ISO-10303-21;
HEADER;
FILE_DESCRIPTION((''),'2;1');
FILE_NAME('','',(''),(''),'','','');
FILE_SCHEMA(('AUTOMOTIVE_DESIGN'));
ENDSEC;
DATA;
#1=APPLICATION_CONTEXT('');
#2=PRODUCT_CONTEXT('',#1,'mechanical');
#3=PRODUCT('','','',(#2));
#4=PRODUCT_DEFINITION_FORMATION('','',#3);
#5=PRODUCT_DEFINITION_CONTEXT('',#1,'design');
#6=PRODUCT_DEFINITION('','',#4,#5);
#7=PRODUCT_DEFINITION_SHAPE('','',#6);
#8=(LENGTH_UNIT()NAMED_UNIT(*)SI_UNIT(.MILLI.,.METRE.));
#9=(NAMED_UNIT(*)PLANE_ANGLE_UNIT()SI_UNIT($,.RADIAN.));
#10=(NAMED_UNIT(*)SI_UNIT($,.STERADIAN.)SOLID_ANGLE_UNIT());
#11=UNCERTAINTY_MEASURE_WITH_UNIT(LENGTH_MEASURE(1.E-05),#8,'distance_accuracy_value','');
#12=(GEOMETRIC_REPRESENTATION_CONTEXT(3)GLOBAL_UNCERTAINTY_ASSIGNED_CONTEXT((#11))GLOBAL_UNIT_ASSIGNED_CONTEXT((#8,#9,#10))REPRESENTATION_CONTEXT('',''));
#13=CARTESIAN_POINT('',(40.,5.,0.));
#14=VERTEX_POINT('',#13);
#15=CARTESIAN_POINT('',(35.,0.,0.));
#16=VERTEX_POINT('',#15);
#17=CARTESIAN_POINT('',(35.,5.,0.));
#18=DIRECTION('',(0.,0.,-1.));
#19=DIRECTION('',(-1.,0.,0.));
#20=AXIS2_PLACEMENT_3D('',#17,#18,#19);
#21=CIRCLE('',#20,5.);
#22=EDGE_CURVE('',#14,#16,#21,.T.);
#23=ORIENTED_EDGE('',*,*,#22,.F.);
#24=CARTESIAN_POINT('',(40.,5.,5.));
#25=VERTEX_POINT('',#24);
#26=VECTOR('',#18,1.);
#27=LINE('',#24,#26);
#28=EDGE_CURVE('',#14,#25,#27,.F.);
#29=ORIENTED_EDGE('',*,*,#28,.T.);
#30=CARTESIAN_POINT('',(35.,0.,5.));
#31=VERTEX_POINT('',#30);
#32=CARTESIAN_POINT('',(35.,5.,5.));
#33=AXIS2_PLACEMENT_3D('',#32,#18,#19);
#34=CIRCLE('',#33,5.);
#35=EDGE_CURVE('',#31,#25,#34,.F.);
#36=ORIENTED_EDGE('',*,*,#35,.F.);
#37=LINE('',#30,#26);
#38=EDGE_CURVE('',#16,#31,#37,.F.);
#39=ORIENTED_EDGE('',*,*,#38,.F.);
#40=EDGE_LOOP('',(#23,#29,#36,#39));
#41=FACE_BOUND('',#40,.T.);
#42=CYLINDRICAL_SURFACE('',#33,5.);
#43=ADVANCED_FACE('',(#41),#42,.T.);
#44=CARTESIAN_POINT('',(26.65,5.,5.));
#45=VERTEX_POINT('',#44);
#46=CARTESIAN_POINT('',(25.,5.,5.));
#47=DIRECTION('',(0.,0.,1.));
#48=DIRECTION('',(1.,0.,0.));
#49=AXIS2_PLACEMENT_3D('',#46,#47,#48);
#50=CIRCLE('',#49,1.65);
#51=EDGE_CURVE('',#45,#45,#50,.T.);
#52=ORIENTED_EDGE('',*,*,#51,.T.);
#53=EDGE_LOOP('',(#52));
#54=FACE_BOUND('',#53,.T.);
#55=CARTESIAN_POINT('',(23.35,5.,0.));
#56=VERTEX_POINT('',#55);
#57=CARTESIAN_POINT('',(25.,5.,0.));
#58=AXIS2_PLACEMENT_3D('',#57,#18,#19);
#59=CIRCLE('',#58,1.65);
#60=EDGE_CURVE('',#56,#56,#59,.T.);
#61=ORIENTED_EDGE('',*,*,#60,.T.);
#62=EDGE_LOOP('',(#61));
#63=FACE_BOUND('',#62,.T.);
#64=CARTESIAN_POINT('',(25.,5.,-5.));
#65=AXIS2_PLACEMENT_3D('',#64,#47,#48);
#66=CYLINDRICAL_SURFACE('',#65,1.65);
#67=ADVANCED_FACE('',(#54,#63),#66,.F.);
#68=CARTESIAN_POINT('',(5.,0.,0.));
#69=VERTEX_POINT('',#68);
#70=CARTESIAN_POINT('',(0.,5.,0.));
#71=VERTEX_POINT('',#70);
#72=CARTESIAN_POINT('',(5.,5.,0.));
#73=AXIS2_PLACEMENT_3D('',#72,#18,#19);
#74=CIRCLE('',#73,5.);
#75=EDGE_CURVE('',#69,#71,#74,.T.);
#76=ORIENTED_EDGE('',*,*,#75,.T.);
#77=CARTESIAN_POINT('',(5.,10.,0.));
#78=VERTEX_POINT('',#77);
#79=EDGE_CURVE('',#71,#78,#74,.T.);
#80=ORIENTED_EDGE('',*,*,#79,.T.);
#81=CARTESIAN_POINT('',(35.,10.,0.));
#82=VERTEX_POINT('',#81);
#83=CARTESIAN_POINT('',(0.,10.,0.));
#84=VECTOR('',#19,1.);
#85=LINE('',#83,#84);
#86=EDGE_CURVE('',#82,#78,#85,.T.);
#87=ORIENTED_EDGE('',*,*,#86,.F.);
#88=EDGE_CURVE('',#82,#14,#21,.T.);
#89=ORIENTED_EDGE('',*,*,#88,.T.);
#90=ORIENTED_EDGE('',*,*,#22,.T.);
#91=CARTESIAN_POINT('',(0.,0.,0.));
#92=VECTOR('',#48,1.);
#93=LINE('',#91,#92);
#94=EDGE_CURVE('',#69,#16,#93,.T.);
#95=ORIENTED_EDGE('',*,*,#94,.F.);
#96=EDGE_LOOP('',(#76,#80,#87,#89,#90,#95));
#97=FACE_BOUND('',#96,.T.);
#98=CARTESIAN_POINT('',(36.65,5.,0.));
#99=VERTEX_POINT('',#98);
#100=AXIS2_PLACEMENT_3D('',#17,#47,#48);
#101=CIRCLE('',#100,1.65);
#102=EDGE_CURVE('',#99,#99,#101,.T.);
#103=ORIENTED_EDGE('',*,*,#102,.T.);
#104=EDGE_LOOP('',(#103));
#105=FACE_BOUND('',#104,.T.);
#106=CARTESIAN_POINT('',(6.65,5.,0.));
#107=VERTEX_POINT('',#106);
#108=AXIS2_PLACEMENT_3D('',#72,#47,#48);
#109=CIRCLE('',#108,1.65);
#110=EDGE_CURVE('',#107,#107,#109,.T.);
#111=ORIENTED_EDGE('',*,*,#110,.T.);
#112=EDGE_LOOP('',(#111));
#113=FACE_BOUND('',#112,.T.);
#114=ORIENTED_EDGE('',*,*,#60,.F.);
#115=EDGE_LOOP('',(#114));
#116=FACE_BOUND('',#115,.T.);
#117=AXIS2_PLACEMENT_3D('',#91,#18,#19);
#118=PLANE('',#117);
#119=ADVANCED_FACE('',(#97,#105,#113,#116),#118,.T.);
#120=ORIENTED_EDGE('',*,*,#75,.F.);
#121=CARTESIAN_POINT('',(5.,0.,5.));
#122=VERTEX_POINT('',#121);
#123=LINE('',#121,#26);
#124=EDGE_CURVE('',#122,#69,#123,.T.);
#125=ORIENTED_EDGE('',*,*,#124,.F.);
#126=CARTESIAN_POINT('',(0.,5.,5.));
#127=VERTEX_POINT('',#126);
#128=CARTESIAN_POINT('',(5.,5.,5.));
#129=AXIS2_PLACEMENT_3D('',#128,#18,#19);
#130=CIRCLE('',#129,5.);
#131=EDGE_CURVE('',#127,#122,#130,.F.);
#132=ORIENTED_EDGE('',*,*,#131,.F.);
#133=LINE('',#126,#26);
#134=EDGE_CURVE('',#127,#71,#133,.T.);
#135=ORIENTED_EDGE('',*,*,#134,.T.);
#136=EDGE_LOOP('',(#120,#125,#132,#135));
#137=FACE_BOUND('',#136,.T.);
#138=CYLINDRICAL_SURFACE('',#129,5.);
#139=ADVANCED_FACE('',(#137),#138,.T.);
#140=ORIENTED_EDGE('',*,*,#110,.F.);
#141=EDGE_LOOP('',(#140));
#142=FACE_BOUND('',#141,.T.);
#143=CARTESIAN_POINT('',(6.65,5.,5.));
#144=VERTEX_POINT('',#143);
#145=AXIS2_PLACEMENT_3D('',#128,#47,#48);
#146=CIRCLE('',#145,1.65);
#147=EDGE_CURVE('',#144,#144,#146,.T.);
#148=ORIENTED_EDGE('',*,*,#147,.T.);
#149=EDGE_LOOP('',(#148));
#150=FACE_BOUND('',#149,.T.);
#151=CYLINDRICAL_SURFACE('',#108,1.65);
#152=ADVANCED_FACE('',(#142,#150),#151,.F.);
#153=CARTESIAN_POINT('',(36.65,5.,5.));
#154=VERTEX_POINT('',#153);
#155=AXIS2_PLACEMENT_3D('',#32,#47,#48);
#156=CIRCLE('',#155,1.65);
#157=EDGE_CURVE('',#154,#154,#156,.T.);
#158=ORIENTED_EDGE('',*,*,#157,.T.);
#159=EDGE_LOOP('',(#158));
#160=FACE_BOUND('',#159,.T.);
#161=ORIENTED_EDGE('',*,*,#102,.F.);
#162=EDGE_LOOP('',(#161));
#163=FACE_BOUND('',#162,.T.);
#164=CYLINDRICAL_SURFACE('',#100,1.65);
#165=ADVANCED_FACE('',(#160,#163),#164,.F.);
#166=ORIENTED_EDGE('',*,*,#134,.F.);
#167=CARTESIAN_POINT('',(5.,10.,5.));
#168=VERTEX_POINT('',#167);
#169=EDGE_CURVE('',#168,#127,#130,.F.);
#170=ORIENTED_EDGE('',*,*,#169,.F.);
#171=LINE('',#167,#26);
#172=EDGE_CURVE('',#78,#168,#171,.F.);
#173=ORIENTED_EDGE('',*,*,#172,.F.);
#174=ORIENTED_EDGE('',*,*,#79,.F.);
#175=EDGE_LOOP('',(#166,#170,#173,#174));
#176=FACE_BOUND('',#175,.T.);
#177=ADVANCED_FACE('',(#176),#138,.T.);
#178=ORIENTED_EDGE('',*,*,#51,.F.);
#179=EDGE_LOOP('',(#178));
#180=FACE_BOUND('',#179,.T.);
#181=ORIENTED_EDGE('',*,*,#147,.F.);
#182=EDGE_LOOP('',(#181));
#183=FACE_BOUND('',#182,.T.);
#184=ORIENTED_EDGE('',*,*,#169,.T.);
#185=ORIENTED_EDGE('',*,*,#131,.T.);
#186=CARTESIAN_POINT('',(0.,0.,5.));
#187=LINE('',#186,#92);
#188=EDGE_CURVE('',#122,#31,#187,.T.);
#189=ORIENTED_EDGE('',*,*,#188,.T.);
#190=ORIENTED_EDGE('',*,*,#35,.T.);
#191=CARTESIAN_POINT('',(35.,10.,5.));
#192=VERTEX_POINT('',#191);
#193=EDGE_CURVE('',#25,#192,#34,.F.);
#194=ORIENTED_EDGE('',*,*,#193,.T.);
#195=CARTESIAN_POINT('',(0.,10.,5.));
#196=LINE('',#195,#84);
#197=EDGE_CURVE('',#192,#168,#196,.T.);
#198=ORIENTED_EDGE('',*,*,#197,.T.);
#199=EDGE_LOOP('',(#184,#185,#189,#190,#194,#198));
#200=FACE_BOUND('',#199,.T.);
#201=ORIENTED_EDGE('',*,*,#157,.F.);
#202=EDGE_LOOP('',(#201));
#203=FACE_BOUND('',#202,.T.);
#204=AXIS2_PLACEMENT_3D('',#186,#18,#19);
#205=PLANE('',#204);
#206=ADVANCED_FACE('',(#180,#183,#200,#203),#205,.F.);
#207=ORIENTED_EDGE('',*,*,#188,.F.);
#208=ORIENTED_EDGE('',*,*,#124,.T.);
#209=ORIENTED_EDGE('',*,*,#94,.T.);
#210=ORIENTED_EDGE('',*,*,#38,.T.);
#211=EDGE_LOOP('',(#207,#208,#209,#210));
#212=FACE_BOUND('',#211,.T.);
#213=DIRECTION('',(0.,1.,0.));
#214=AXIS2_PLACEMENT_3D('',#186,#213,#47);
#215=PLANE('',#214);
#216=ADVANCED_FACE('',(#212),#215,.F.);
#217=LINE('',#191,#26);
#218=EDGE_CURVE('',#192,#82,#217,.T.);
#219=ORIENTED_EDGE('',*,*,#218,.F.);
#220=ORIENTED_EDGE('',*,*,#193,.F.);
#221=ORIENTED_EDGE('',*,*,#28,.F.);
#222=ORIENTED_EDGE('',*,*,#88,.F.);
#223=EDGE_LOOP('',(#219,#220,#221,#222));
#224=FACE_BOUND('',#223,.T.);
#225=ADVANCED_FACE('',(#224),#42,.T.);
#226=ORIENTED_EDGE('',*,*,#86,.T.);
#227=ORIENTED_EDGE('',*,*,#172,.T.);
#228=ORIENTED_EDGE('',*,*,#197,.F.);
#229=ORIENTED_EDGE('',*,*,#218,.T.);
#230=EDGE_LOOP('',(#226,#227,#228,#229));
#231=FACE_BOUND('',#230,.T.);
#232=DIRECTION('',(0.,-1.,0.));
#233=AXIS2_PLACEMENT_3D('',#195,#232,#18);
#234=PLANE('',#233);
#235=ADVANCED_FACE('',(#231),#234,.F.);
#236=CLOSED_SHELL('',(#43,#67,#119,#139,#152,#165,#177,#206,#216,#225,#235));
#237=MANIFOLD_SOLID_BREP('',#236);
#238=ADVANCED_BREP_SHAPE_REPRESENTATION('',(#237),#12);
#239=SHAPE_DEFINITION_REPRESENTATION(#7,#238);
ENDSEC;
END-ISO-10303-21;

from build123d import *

# Parameters (mm, degrees)
SKICA1_W                 = 40
SKICA1_H                 = 10
P_IDAT_VYSUNUT_M1_DEPTH  = 5
SKICA2_R                 = 1.65
ODEBRAT_VYSUNUT_M1_DEPTH = 5
ZAOBLIT2_R               = 5
SKICA3_R                 = 1.65
ODEBRAT_VYSUNUT_M2_DEPTH = 10


with BuildPart() as part:
    # Skica1 → Přidat vysunutím1 (new body)
    with BuildSketch(Plane.XY):
        with Locations((20, 5)):
            Rectangle(SKICA1_W, SKICA1_H)
    extrude(amount=P_IDAT_VYSUNUT_M1_DEPTH)

    # Skica2 → Odebrat vysunutím1 (cut)
    with BuildSketch(Plane.XY.offset(5)):
        with Locations((5, 5)):
            Circle(SKICA2_R)
        with Locations((35, 5)):
            Circle(SKICA2_R)
    extrude(amount=-ODEBRAT_VYSUNUT_M1_DEPTH, mode=Mode.SUBTRACT)

    # Zaoblit2
    zaoblit2_edges = [part.edges().sort_by_distance(p)[0] for p in [
        (40, 0, 2.5),
        (40, 10, 2.5),
        (0, 0, 2.5),
        (0, 10, 2.5),
    ]]
    fillet(zaoblit2_edges, radius=ZAOBLIT2_R - 0.0001)  # a hair under: the kernel refuses the full size

    # Skica3 → Odebrat vysunutím2 (cut)
    with BuildSketch(Plane.XY.offset(5)):
        with Locations((25, 5)):
            Circle(SKICA3_R)
    extrude(amount=-ODEBRAT_VYSUNUT_M2_DEPTH, mode=Mode.SUBTRACT)


solid = part.part
